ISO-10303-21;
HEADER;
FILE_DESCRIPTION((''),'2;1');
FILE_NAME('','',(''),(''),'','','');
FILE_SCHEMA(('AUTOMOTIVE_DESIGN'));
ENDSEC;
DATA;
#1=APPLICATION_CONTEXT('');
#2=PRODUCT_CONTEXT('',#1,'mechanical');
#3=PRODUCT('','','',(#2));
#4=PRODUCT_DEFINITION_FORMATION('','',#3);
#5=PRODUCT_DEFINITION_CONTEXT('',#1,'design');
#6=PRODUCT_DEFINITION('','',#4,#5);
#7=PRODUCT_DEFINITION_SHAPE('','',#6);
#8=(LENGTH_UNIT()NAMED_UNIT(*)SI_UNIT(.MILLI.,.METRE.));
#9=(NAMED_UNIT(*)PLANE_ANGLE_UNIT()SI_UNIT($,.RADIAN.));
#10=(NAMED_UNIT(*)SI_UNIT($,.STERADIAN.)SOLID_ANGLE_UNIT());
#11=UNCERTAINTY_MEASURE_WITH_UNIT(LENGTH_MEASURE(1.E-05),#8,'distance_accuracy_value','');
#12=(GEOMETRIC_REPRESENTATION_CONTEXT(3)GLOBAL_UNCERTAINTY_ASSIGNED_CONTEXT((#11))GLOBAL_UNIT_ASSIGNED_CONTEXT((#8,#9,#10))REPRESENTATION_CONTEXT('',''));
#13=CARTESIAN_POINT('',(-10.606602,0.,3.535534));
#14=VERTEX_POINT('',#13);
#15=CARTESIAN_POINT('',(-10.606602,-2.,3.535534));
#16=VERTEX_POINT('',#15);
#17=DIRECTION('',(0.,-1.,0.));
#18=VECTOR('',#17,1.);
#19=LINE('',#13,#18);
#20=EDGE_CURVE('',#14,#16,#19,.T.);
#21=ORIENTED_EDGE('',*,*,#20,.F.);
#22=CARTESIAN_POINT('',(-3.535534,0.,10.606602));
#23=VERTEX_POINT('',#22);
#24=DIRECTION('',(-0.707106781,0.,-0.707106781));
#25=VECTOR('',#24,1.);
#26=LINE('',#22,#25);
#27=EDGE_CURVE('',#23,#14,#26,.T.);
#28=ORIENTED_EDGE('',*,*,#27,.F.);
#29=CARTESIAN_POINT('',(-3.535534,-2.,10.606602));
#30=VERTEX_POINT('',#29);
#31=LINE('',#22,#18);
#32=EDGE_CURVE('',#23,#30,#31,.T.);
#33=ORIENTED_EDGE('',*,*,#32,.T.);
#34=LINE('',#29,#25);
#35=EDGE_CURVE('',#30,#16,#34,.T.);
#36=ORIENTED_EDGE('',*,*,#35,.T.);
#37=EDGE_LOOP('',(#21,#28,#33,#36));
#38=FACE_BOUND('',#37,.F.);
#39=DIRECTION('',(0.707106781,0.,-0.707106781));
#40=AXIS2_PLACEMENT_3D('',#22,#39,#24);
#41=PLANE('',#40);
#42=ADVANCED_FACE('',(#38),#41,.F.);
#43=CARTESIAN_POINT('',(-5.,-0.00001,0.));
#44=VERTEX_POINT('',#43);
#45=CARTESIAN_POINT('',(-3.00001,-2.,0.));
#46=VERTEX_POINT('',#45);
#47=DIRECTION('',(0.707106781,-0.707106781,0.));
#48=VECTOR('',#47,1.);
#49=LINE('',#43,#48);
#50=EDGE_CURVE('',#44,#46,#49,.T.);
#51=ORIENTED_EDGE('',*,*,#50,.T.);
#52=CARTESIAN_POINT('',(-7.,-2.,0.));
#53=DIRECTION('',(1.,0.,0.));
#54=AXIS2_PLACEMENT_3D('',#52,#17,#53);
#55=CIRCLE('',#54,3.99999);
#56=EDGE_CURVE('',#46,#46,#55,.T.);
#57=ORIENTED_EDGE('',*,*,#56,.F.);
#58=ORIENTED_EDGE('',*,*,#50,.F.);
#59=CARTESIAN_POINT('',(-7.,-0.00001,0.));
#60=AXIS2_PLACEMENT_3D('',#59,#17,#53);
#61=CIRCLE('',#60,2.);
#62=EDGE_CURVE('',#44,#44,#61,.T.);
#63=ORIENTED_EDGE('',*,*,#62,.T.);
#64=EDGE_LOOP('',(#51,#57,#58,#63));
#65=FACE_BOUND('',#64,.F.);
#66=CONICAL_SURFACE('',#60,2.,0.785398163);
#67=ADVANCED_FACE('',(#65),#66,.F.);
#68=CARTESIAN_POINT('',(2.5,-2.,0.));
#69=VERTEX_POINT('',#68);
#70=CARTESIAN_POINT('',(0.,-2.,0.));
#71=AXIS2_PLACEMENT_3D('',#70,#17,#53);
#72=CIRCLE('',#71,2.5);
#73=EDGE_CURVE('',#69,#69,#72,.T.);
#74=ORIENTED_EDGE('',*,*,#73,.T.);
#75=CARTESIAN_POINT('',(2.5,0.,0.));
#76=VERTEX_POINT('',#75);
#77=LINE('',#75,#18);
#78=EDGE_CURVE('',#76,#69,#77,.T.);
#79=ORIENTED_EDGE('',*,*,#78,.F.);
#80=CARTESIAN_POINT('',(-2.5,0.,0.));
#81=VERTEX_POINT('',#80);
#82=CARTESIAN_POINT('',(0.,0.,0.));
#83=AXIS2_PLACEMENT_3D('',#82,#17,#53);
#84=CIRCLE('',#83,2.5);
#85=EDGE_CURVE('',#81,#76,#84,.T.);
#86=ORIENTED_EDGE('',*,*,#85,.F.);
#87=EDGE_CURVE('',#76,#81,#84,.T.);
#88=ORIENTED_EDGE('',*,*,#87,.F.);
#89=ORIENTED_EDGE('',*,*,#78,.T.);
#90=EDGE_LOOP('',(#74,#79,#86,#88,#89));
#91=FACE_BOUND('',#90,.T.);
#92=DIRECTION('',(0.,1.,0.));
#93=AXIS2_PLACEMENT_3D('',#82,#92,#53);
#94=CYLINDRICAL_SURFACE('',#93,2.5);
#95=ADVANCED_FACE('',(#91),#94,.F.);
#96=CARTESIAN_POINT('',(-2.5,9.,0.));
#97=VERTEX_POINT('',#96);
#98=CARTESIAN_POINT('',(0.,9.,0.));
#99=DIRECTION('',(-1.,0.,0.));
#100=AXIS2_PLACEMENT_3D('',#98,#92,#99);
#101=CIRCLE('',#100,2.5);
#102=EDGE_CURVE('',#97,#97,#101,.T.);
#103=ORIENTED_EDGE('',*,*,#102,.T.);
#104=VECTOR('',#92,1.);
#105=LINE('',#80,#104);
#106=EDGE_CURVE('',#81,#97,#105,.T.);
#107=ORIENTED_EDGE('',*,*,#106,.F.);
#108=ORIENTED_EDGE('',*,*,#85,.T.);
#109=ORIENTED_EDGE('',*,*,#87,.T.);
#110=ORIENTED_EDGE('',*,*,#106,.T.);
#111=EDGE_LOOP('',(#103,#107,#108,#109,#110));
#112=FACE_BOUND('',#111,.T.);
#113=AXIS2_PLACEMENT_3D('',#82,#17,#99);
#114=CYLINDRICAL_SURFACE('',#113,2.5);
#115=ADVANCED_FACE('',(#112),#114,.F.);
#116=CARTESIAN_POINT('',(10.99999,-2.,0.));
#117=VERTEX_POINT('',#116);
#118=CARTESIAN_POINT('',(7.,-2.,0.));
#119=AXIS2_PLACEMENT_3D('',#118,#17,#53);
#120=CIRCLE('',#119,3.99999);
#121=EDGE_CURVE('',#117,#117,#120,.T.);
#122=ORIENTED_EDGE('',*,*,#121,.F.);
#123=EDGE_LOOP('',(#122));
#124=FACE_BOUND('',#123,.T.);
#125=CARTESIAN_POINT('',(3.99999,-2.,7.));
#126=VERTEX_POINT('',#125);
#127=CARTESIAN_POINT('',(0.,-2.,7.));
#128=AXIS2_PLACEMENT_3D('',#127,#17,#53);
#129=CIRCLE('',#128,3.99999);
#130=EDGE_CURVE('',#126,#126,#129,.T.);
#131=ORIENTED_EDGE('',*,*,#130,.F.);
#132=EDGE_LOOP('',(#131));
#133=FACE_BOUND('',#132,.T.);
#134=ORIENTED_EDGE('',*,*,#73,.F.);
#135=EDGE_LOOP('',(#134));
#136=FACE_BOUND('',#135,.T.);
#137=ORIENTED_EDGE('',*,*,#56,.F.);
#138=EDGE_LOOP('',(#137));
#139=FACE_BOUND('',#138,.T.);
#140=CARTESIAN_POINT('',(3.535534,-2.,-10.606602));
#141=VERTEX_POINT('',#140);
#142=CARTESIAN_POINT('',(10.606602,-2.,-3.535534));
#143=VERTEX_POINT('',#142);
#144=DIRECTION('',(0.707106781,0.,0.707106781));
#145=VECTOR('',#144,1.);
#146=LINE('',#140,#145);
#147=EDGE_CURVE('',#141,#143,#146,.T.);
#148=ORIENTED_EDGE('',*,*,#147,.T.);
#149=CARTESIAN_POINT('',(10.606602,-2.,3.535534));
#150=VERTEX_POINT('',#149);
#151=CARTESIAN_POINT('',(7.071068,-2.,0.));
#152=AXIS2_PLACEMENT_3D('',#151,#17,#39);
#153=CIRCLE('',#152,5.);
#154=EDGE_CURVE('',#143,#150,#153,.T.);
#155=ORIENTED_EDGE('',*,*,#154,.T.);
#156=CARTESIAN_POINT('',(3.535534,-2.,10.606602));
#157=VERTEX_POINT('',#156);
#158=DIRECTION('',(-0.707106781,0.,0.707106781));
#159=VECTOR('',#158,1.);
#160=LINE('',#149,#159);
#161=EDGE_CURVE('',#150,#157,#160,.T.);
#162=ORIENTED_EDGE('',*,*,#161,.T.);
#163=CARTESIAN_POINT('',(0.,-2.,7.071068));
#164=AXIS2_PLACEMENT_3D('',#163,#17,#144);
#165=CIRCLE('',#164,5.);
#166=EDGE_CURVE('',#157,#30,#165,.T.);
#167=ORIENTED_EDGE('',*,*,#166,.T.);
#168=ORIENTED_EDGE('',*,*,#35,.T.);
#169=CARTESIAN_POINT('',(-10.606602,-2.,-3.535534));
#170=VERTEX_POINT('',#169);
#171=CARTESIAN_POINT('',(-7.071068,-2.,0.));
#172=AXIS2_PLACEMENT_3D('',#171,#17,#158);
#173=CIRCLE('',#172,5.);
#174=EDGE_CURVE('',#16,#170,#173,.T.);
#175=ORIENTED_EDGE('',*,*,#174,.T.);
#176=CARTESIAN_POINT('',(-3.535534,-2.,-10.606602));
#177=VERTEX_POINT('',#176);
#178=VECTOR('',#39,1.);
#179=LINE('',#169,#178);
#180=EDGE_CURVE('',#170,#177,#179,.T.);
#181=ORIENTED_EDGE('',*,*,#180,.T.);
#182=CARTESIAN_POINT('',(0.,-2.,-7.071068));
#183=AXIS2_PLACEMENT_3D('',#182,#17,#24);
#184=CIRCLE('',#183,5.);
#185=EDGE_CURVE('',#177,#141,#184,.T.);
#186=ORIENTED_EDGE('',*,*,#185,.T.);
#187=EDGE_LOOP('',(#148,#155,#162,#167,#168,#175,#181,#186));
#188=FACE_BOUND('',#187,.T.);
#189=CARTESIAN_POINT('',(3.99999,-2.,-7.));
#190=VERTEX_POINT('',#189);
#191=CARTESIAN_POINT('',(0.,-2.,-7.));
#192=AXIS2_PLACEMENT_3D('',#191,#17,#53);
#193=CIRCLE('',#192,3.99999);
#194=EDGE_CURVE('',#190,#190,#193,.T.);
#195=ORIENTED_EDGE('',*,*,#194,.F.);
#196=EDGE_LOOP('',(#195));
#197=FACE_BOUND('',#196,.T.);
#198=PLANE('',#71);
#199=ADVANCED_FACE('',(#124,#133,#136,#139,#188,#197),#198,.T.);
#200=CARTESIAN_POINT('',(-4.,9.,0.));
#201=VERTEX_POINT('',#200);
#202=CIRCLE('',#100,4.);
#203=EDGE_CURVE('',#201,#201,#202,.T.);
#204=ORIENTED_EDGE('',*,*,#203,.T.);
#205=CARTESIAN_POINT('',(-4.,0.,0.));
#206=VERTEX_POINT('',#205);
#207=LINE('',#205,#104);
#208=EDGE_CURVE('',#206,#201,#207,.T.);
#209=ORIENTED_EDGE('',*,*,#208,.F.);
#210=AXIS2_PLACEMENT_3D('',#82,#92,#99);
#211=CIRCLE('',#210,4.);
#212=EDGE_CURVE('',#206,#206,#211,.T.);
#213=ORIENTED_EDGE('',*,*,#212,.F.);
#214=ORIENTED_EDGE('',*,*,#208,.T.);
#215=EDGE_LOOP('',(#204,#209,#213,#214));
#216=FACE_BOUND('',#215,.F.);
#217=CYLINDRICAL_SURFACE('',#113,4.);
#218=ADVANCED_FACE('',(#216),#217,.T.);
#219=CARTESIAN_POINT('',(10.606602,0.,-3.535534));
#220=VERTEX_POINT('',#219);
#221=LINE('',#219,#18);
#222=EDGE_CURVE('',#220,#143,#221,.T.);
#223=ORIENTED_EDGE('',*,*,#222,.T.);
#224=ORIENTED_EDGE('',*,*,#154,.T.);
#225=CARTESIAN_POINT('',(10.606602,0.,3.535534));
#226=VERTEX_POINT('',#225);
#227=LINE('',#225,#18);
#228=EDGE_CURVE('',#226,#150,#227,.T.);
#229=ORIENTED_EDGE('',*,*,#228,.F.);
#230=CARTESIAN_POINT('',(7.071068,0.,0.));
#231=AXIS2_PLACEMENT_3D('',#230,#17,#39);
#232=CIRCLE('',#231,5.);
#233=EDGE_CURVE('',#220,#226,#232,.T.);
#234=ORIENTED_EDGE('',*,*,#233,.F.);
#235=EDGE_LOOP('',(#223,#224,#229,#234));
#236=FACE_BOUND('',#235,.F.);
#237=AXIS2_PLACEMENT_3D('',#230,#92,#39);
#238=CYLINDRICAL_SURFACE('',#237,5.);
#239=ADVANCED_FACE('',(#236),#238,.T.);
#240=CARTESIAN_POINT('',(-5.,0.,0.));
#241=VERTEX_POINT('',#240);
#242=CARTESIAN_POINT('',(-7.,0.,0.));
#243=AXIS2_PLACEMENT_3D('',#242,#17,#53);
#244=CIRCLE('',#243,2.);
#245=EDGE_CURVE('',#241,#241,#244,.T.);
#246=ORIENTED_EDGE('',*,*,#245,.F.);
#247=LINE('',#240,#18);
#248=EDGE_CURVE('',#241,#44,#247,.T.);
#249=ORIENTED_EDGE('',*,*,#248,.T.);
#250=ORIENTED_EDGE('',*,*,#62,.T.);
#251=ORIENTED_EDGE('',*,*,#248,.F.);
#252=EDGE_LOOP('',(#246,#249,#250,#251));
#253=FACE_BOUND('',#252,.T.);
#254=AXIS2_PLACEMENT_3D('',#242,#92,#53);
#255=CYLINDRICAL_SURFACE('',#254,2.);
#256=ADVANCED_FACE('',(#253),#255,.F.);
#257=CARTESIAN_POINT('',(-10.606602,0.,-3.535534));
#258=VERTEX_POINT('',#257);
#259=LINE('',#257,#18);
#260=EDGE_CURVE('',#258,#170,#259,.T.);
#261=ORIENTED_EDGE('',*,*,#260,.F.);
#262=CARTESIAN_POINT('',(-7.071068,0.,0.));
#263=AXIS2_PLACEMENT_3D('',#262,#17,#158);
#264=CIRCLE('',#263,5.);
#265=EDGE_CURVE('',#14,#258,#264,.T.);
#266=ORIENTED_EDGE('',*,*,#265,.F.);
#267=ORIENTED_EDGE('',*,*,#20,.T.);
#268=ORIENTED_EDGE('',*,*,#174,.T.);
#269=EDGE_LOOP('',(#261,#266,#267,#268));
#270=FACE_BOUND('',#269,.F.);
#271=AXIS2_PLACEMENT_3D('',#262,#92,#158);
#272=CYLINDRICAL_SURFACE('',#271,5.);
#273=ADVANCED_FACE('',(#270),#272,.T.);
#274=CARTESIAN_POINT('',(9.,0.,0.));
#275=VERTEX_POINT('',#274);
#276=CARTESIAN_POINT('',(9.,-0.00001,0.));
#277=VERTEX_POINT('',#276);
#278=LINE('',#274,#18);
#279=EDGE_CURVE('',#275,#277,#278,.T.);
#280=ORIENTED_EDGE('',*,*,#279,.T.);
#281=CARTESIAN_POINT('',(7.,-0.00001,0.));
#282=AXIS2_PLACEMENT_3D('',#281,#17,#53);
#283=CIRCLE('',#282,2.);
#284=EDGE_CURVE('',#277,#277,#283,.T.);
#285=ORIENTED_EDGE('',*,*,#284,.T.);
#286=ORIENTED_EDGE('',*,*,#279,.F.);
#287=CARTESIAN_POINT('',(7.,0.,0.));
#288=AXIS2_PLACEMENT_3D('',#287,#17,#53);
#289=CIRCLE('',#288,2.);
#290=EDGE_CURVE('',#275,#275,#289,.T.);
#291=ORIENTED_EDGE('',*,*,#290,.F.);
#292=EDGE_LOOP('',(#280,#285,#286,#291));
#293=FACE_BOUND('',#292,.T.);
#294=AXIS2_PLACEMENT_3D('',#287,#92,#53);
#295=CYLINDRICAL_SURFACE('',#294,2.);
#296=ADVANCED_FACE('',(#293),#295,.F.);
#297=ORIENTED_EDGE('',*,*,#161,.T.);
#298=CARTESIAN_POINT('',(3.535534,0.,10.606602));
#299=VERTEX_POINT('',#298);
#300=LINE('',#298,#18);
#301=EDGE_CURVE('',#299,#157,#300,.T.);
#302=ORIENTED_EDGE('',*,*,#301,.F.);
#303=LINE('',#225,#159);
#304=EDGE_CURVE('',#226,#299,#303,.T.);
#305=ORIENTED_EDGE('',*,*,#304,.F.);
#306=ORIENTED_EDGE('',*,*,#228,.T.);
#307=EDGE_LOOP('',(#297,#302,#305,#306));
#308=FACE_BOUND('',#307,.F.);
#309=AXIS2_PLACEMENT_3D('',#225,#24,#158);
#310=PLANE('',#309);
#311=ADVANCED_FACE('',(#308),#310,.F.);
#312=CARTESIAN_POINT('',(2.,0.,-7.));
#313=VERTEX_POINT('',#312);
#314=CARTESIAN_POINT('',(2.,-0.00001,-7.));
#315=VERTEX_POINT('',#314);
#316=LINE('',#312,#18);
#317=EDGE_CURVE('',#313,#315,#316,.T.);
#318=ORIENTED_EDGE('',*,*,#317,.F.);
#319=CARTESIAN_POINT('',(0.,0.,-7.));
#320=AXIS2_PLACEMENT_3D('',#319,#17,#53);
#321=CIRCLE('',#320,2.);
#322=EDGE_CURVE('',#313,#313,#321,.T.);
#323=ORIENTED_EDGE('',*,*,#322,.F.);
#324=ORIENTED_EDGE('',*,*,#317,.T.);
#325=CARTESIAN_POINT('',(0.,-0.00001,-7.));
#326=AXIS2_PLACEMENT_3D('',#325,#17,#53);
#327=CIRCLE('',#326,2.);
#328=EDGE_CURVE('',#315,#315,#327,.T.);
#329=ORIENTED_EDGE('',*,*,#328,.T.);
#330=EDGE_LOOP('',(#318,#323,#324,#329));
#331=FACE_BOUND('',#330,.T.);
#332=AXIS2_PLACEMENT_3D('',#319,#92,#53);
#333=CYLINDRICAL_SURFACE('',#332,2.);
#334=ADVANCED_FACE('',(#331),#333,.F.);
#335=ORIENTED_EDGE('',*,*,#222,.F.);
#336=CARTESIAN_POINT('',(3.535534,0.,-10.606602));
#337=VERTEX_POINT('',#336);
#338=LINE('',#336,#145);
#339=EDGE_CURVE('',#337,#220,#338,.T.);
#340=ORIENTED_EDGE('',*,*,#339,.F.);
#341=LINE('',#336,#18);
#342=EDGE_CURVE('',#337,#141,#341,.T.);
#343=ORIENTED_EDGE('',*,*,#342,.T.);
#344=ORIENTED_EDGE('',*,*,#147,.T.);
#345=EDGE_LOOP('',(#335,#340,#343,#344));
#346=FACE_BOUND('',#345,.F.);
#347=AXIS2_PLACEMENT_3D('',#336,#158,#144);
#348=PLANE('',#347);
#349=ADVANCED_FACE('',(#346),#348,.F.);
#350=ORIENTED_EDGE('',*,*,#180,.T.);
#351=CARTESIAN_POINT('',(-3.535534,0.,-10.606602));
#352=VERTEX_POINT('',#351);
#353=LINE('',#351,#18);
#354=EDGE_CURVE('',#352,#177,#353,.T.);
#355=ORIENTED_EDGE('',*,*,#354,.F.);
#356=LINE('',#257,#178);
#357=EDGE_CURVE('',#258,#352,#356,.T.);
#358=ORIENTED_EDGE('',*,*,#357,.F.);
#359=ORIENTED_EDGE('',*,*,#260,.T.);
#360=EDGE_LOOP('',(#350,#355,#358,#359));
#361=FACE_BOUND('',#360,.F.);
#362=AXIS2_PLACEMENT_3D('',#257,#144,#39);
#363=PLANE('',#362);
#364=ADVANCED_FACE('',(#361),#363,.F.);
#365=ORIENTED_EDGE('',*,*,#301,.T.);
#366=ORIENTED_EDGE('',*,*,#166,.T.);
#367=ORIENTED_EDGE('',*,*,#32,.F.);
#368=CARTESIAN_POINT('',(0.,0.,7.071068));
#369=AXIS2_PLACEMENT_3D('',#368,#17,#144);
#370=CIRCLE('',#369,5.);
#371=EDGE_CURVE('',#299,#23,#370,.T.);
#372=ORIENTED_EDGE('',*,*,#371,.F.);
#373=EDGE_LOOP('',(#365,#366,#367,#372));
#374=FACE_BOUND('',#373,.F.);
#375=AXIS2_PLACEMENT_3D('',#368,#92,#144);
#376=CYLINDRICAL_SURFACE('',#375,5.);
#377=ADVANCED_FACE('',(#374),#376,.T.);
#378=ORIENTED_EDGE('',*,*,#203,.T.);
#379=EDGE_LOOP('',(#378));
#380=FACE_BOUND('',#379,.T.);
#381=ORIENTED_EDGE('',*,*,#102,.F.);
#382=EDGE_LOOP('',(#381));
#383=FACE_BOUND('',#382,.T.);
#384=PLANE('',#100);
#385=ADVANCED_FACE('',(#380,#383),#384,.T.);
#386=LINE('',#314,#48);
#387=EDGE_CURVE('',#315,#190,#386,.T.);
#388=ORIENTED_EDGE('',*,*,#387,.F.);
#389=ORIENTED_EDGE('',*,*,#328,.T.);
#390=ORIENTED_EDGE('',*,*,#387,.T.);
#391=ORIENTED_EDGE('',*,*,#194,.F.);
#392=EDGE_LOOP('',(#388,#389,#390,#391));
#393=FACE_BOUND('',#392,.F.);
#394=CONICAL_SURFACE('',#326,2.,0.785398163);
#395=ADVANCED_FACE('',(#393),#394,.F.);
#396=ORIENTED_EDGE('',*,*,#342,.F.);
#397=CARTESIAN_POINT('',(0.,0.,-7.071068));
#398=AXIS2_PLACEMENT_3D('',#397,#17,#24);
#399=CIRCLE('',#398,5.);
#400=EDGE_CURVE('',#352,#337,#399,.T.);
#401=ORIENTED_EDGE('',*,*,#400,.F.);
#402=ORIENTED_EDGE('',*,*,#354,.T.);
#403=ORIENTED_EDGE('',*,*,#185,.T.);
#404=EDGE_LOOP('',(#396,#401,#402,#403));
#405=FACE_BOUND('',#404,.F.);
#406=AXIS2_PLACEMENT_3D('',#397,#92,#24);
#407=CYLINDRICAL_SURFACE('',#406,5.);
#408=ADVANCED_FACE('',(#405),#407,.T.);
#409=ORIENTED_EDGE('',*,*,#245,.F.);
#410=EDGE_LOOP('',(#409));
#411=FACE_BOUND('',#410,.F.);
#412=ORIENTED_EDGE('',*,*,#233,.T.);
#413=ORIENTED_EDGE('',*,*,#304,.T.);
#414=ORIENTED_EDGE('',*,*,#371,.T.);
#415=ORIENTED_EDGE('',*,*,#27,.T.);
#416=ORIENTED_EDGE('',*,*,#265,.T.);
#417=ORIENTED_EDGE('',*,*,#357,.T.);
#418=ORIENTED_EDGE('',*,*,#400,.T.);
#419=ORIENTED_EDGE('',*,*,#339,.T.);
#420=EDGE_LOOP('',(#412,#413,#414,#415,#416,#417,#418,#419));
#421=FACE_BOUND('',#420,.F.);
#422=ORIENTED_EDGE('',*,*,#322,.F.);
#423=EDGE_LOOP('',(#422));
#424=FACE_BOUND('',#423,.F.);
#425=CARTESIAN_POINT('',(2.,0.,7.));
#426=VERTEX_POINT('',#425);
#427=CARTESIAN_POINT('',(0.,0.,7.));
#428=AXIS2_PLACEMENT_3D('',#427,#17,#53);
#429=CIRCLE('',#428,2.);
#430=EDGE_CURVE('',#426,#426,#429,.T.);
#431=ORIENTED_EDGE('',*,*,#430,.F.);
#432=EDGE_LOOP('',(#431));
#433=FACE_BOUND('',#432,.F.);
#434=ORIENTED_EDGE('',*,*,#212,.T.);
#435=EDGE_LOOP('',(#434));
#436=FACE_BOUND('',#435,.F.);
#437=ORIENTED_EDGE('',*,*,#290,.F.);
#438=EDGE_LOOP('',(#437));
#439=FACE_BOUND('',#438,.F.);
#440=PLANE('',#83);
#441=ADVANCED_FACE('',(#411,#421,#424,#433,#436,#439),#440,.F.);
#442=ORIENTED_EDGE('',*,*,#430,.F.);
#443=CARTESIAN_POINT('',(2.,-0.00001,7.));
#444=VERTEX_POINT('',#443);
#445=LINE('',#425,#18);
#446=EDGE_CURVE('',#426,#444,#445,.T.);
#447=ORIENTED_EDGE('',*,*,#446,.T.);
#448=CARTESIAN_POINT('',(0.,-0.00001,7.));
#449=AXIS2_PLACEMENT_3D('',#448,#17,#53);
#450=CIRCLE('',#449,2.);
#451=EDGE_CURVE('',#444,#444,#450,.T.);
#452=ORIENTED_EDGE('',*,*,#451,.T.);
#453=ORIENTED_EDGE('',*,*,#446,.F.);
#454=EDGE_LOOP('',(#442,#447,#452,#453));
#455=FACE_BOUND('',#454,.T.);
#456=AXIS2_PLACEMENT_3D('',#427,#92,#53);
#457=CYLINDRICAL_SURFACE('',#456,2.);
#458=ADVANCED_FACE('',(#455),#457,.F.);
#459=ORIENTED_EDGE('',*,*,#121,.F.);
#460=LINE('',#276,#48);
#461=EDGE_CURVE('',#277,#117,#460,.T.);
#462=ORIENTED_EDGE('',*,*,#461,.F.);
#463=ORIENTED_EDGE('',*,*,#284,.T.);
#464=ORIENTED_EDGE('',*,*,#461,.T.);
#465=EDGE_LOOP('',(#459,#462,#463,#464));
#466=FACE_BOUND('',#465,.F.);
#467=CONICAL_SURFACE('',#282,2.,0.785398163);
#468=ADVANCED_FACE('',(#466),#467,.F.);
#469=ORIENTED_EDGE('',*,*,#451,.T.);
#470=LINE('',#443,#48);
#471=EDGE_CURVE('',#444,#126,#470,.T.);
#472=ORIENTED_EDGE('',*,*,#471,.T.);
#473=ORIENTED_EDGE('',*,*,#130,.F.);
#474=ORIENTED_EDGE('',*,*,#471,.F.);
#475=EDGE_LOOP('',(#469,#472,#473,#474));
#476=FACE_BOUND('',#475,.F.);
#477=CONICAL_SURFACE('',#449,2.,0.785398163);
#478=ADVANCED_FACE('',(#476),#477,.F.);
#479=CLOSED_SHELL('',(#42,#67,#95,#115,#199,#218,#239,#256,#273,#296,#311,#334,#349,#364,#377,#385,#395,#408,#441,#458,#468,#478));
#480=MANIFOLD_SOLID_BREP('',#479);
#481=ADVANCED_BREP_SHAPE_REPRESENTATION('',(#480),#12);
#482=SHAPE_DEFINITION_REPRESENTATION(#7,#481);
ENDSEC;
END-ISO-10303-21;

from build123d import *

# Parameters (mm, degrees)
F0_R     = 2
F0_R_2   = 2.5
F1_DEPTH = 2
F2_SIZE  = 1.99999
F3_R     = 4
F3_R_2   = 2.5
F4_DEPTH = 9


# Not quite as in the source:
# - a fillet or chamfer is up to 0.001 mm smaller than in the source, because OpenCascade refuses the exact size


with BuildPart() as f1:
    # F0 (on Front) → F1 (new body)
    with BuildSketch(Plane.XZ):
        with BuildLine():
            Line((-10.6066017178, -3.5355339059), (-3.5355339059, -10.6066017178))
            ThreePointArc((-3.5355339059, -10.6066017178), (0, -12.0710678119), (3.5355339059, -10.6066017178))
            Line((3.5355339059, -10.6066017178), (10.6066017178, -3.5355339059))
            ThreePointArc((10.6066017178, -3.5355339059), (12.0710678119, 0), (10.6066017178, 3.5355339059))
            Line((10.6066017178, 3.5355339059), (3.5355339059, 10.6066017178))
            ThreePointArc((3.5355339059, 10.6066017178), (0, 12.0710678119), (-3.5355339059, 10.6066017178))
            Line((-3.5355339059, 10.6066017178), (-10.6066017178, 3.5355339059))
            ThreePointArc((-10.6066017178, 3.5355339059), (-12.0710678119, 0), (-10.6066017178, -3.5355339059))
        make_face()
        with Locations((-7, 0)):
            Circle(F0_R, mode=Mode.SUBTRACT)
        with Locations((0, -7)):
            Circle(F0_R, mode=Mode.SUBTRACT)
        Circle(F0_R_2, mode=Mode.SUBTRACT)
        with Locations((7, 0)):
            Circle(F0_R, mode=Mode.SUBTRACT)
        with Locations((0, 7)):
            Circle(F0_R, mode=Mode.SUBTRACT)
    extrude(amount=F1_DEPTH)

    # F2 (size 2 in the source; OpenCascade refuses exactly that, so slightly less here)
    f2_edges = [f1.edges().sort_by_distance(p)[0] for p in [
        (5, -2, 0),
        (-2, -2, -7),
        (-9, -2, 0),
        (-2, -2, 7),
    ]]
    chamfer(f2_edges, length=F2_SIZE)

    # F3 (on face) → F4 (join)
    with BuildSketch(Plane(origin=(0, 0, 0), x_dir=(-1, 0, 0), z_dir=(0, 1, 0))):
        Circle(F3_R)
        Circle(F3_R_2, mode=Mode.SUBTRACT)
    extrude(amount=F4_DEPTH)


solid = f1.part
